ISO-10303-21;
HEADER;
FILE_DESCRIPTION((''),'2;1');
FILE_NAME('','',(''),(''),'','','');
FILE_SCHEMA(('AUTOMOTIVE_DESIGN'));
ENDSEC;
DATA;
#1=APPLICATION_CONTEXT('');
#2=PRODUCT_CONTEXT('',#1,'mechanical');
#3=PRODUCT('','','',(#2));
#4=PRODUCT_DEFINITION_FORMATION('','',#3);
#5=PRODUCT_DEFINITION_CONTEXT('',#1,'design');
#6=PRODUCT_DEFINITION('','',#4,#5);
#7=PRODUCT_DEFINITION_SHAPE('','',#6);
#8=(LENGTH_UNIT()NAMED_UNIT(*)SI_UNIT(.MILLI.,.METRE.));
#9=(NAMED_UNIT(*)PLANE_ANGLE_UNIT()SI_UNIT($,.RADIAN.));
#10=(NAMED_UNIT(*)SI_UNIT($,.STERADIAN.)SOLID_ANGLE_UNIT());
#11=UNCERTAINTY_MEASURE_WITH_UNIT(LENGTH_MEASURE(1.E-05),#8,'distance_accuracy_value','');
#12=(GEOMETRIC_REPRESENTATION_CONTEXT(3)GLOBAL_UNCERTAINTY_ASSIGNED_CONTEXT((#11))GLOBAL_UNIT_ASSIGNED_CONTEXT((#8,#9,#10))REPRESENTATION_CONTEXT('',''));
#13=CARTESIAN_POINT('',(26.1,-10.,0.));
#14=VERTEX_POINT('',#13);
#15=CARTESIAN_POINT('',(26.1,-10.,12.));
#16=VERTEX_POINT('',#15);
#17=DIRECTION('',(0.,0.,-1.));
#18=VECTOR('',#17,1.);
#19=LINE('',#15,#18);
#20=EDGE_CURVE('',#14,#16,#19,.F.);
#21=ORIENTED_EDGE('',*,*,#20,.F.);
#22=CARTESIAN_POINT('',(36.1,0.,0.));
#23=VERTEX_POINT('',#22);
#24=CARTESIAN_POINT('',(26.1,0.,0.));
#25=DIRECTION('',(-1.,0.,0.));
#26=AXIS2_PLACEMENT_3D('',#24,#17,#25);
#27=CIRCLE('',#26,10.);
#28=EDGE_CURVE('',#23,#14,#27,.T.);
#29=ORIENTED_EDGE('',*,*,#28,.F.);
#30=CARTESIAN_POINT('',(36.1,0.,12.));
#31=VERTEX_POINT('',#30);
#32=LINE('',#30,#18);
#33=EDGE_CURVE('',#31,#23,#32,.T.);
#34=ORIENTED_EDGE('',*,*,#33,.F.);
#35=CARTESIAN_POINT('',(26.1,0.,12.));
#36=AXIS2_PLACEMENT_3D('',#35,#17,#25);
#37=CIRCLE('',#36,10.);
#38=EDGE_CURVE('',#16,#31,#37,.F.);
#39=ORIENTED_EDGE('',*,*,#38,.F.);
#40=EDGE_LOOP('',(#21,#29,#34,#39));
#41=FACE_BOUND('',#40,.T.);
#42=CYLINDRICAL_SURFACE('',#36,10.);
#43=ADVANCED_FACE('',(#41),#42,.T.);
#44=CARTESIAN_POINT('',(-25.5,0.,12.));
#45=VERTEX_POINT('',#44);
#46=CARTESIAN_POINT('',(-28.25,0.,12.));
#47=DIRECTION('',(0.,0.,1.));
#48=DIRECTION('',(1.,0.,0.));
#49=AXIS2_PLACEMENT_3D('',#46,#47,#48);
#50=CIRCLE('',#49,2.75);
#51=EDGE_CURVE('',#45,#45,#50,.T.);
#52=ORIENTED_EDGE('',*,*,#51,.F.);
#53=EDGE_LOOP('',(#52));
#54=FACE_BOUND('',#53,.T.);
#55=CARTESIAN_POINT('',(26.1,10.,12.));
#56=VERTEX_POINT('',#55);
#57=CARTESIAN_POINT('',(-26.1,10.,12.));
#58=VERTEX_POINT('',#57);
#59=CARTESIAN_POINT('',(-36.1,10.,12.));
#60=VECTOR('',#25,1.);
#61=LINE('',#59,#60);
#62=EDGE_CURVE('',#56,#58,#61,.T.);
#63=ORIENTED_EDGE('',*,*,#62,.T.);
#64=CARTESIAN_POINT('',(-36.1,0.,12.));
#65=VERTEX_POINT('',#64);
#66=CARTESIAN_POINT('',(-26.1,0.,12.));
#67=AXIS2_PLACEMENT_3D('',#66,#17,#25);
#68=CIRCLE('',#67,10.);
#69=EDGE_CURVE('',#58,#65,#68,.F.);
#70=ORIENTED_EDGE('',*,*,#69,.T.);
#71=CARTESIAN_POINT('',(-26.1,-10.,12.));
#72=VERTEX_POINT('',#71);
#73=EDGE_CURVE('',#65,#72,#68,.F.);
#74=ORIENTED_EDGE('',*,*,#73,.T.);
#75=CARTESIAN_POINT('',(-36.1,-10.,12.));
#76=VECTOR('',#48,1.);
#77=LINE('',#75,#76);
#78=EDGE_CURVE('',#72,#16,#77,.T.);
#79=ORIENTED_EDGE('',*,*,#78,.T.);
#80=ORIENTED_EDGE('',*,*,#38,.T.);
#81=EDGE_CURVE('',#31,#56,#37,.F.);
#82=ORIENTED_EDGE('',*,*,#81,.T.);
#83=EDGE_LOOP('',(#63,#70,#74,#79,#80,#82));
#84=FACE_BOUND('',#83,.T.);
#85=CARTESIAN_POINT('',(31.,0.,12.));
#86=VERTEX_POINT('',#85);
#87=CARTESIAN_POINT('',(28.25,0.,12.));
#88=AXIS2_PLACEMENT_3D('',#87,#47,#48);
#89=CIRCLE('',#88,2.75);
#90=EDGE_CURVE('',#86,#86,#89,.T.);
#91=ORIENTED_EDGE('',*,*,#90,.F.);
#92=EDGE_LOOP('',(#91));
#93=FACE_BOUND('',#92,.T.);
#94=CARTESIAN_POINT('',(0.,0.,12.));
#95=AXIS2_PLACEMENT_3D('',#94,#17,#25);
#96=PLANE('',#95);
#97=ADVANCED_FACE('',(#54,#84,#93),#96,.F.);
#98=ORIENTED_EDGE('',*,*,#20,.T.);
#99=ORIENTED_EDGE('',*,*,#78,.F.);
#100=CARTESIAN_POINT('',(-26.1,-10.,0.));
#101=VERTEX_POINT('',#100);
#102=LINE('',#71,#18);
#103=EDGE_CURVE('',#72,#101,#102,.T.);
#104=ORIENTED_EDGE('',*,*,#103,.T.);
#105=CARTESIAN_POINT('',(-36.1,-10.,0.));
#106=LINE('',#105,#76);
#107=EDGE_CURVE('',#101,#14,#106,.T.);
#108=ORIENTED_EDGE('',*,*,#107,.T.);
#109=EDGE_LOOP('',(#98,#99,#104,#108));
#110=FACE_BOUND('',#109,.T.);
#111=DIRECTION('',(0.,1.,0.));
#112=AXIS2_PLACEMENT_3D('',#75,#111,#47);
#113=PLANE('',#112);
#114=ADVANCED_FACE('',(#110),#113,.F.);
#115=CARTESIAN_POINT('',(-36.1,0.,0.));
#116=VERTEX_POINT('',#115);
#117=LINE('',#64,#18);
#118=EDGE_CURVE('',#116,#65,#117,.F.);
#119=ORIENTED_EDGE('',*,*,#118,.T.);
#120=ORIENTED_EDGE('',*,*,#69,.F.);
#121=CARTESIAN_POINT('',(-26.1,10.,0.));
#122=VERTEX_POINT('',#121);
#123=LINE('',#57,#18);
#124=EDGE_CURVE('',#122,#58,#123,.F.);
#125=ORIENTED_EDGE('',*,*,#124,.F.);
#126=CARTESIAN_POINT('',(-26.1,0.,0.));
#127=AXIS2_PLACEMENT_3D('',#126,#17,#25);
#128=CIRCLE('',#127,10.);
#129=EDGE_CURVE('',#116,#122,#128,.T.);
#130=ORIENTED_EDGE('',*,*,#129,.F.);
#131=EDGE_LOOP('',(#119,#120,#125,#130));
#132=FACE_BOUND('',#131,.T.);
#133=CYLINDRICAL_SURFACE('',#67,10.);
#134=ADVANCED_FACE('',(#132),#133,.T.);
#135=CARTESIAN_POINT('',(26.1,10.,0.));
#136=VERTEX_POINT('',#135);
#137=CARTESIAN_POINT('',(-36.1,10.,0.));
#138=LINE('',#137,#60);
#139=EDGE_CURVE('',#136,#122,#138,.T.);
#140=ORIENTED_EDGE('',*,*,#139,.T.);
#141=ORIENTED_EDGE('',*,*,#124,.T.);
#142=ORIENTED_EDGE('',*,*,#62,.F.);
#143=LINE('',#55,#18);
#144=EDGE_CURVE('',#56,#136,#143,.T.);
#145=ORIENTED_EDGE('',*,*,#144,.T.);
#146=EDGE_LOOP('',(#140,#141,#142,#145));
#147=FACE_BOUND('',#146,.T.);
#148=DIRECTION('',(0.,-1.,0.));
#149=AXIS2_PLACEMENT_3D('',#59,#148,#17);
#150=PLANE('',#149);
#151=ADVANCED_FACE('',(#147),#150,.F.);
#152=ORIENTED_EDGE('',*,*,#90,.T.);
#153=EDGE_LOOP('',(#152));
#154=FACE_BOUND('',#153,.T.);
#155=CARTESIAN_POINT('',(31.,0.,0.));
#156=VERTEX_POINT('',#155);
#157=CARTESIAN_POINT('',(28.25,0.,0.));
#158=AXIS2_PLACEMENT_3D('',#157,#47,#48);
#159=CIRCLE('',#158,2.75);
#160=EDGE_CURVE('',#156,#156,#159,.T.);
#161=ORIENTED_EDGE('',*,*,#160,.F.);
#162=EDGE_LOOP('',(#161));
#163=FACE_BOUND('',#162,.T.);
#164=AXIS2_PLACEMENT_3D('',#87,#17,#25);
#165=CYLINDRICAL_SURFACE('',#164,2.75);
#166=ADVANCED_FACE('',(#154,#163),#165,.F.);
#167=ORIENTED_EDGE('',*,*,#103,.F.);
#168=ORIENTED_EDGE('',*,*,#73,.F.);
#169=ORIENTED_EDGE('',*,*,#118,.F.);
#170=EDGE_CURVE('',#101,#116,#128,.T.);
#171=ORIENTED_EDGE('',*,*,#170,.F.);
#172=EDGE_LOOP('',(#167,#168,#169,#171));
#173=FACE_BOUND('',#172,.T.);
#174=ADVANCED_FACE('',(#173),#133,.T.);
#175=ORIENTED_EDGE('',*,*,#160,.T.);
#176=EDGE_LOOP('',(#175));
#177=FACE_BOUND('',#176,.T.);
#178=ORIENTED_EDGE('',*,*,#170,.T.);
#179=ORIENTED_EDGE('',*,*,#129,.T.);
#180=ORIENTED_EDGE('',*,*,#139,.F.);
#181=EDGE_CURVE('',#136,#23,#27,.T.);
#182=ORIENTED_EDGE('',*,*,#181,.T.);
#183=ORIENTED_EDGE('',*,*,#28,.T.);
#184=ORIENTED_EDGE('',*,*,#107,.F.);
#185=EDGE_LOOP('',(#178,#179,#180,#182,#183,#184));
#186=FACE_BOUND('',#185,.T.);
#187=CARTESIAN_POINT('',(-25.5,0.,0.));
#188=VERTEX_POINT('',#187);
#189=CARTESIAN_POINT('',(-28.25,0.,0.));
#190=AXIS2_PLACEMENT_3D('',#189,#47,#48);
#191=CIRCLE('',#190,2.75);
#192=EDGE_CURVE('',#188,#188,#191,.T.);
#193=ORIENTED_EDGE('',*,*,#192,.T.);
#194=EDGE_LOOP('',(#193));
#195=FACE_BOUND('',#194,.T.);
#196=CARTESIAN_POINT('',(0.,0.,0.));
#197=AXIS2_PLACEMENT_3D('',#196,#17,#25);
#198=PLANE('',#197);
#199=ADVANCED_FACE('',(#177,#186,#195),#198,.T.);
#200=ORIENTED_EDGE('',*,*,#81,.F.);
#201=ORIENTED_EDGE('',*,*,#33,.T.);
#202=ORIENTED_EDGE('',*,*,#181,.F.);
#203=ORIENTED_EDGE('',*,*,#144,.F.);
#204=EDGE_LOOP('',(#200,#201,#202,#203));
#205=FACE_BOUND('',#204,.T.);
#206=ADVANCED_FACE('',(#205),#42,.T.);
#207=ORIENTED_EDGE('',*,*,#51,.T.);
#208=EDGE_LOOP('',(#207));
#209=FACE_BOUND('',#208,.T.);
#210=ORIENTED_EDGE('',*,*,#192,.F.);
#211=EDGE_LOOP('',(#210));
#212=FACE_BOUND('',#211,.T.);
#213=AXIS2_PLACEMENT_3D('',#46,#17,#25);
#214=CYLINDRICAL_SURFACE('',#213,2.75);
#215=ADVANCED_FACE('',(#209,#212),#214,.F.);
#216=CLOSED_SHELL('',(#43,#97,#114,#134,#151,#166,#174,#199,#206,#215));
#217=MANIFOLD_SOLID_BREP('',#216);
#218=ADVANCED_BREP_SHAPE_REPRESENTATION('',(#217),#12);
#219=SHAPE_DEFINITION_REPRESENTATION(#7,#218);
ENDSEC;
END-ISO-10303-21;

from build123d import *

# Parameters (mm, degrees)
SKETCH1_W           = 72.2
SKETCH1_H           = 20
SKETCH1_R           = 2.75
BOSS_EXTRUDE1_DEPTH = 12
FILLET1_R           = 10


with BuildPart() as part:
    # Sketch1 → Boss-Extrude1 (new body)
    with BuildSketch(Plane.XY):
        Rectangle(SKETCH1_W, SKETCH1_H)
        with Locations((-28.25, 0)):
            Circle(SKETCH1_R, mode=Mode.SUBTRACT)
        with Locations((28.25, 0)):
            Circle(SKETCH1_R, mode=Mode.SUBTRACT)
    extrude(amount=BOSS_EXTRUDE1_DEPTH)

    # Fillet1
    fillet1_edges = [part.edges().sort_by_distance(p)[0] for p in [
        (36.1, 10, 6),
        (36.1, -10, 6),
        (-36.1, 10, 6),
        (-36.1, -10, 6),
    ]]
    fillet(fillet1_edges, radius=FILLET1_R - 0.0001)  # a hair under: the kernel refuses the full size


solid = part.part
